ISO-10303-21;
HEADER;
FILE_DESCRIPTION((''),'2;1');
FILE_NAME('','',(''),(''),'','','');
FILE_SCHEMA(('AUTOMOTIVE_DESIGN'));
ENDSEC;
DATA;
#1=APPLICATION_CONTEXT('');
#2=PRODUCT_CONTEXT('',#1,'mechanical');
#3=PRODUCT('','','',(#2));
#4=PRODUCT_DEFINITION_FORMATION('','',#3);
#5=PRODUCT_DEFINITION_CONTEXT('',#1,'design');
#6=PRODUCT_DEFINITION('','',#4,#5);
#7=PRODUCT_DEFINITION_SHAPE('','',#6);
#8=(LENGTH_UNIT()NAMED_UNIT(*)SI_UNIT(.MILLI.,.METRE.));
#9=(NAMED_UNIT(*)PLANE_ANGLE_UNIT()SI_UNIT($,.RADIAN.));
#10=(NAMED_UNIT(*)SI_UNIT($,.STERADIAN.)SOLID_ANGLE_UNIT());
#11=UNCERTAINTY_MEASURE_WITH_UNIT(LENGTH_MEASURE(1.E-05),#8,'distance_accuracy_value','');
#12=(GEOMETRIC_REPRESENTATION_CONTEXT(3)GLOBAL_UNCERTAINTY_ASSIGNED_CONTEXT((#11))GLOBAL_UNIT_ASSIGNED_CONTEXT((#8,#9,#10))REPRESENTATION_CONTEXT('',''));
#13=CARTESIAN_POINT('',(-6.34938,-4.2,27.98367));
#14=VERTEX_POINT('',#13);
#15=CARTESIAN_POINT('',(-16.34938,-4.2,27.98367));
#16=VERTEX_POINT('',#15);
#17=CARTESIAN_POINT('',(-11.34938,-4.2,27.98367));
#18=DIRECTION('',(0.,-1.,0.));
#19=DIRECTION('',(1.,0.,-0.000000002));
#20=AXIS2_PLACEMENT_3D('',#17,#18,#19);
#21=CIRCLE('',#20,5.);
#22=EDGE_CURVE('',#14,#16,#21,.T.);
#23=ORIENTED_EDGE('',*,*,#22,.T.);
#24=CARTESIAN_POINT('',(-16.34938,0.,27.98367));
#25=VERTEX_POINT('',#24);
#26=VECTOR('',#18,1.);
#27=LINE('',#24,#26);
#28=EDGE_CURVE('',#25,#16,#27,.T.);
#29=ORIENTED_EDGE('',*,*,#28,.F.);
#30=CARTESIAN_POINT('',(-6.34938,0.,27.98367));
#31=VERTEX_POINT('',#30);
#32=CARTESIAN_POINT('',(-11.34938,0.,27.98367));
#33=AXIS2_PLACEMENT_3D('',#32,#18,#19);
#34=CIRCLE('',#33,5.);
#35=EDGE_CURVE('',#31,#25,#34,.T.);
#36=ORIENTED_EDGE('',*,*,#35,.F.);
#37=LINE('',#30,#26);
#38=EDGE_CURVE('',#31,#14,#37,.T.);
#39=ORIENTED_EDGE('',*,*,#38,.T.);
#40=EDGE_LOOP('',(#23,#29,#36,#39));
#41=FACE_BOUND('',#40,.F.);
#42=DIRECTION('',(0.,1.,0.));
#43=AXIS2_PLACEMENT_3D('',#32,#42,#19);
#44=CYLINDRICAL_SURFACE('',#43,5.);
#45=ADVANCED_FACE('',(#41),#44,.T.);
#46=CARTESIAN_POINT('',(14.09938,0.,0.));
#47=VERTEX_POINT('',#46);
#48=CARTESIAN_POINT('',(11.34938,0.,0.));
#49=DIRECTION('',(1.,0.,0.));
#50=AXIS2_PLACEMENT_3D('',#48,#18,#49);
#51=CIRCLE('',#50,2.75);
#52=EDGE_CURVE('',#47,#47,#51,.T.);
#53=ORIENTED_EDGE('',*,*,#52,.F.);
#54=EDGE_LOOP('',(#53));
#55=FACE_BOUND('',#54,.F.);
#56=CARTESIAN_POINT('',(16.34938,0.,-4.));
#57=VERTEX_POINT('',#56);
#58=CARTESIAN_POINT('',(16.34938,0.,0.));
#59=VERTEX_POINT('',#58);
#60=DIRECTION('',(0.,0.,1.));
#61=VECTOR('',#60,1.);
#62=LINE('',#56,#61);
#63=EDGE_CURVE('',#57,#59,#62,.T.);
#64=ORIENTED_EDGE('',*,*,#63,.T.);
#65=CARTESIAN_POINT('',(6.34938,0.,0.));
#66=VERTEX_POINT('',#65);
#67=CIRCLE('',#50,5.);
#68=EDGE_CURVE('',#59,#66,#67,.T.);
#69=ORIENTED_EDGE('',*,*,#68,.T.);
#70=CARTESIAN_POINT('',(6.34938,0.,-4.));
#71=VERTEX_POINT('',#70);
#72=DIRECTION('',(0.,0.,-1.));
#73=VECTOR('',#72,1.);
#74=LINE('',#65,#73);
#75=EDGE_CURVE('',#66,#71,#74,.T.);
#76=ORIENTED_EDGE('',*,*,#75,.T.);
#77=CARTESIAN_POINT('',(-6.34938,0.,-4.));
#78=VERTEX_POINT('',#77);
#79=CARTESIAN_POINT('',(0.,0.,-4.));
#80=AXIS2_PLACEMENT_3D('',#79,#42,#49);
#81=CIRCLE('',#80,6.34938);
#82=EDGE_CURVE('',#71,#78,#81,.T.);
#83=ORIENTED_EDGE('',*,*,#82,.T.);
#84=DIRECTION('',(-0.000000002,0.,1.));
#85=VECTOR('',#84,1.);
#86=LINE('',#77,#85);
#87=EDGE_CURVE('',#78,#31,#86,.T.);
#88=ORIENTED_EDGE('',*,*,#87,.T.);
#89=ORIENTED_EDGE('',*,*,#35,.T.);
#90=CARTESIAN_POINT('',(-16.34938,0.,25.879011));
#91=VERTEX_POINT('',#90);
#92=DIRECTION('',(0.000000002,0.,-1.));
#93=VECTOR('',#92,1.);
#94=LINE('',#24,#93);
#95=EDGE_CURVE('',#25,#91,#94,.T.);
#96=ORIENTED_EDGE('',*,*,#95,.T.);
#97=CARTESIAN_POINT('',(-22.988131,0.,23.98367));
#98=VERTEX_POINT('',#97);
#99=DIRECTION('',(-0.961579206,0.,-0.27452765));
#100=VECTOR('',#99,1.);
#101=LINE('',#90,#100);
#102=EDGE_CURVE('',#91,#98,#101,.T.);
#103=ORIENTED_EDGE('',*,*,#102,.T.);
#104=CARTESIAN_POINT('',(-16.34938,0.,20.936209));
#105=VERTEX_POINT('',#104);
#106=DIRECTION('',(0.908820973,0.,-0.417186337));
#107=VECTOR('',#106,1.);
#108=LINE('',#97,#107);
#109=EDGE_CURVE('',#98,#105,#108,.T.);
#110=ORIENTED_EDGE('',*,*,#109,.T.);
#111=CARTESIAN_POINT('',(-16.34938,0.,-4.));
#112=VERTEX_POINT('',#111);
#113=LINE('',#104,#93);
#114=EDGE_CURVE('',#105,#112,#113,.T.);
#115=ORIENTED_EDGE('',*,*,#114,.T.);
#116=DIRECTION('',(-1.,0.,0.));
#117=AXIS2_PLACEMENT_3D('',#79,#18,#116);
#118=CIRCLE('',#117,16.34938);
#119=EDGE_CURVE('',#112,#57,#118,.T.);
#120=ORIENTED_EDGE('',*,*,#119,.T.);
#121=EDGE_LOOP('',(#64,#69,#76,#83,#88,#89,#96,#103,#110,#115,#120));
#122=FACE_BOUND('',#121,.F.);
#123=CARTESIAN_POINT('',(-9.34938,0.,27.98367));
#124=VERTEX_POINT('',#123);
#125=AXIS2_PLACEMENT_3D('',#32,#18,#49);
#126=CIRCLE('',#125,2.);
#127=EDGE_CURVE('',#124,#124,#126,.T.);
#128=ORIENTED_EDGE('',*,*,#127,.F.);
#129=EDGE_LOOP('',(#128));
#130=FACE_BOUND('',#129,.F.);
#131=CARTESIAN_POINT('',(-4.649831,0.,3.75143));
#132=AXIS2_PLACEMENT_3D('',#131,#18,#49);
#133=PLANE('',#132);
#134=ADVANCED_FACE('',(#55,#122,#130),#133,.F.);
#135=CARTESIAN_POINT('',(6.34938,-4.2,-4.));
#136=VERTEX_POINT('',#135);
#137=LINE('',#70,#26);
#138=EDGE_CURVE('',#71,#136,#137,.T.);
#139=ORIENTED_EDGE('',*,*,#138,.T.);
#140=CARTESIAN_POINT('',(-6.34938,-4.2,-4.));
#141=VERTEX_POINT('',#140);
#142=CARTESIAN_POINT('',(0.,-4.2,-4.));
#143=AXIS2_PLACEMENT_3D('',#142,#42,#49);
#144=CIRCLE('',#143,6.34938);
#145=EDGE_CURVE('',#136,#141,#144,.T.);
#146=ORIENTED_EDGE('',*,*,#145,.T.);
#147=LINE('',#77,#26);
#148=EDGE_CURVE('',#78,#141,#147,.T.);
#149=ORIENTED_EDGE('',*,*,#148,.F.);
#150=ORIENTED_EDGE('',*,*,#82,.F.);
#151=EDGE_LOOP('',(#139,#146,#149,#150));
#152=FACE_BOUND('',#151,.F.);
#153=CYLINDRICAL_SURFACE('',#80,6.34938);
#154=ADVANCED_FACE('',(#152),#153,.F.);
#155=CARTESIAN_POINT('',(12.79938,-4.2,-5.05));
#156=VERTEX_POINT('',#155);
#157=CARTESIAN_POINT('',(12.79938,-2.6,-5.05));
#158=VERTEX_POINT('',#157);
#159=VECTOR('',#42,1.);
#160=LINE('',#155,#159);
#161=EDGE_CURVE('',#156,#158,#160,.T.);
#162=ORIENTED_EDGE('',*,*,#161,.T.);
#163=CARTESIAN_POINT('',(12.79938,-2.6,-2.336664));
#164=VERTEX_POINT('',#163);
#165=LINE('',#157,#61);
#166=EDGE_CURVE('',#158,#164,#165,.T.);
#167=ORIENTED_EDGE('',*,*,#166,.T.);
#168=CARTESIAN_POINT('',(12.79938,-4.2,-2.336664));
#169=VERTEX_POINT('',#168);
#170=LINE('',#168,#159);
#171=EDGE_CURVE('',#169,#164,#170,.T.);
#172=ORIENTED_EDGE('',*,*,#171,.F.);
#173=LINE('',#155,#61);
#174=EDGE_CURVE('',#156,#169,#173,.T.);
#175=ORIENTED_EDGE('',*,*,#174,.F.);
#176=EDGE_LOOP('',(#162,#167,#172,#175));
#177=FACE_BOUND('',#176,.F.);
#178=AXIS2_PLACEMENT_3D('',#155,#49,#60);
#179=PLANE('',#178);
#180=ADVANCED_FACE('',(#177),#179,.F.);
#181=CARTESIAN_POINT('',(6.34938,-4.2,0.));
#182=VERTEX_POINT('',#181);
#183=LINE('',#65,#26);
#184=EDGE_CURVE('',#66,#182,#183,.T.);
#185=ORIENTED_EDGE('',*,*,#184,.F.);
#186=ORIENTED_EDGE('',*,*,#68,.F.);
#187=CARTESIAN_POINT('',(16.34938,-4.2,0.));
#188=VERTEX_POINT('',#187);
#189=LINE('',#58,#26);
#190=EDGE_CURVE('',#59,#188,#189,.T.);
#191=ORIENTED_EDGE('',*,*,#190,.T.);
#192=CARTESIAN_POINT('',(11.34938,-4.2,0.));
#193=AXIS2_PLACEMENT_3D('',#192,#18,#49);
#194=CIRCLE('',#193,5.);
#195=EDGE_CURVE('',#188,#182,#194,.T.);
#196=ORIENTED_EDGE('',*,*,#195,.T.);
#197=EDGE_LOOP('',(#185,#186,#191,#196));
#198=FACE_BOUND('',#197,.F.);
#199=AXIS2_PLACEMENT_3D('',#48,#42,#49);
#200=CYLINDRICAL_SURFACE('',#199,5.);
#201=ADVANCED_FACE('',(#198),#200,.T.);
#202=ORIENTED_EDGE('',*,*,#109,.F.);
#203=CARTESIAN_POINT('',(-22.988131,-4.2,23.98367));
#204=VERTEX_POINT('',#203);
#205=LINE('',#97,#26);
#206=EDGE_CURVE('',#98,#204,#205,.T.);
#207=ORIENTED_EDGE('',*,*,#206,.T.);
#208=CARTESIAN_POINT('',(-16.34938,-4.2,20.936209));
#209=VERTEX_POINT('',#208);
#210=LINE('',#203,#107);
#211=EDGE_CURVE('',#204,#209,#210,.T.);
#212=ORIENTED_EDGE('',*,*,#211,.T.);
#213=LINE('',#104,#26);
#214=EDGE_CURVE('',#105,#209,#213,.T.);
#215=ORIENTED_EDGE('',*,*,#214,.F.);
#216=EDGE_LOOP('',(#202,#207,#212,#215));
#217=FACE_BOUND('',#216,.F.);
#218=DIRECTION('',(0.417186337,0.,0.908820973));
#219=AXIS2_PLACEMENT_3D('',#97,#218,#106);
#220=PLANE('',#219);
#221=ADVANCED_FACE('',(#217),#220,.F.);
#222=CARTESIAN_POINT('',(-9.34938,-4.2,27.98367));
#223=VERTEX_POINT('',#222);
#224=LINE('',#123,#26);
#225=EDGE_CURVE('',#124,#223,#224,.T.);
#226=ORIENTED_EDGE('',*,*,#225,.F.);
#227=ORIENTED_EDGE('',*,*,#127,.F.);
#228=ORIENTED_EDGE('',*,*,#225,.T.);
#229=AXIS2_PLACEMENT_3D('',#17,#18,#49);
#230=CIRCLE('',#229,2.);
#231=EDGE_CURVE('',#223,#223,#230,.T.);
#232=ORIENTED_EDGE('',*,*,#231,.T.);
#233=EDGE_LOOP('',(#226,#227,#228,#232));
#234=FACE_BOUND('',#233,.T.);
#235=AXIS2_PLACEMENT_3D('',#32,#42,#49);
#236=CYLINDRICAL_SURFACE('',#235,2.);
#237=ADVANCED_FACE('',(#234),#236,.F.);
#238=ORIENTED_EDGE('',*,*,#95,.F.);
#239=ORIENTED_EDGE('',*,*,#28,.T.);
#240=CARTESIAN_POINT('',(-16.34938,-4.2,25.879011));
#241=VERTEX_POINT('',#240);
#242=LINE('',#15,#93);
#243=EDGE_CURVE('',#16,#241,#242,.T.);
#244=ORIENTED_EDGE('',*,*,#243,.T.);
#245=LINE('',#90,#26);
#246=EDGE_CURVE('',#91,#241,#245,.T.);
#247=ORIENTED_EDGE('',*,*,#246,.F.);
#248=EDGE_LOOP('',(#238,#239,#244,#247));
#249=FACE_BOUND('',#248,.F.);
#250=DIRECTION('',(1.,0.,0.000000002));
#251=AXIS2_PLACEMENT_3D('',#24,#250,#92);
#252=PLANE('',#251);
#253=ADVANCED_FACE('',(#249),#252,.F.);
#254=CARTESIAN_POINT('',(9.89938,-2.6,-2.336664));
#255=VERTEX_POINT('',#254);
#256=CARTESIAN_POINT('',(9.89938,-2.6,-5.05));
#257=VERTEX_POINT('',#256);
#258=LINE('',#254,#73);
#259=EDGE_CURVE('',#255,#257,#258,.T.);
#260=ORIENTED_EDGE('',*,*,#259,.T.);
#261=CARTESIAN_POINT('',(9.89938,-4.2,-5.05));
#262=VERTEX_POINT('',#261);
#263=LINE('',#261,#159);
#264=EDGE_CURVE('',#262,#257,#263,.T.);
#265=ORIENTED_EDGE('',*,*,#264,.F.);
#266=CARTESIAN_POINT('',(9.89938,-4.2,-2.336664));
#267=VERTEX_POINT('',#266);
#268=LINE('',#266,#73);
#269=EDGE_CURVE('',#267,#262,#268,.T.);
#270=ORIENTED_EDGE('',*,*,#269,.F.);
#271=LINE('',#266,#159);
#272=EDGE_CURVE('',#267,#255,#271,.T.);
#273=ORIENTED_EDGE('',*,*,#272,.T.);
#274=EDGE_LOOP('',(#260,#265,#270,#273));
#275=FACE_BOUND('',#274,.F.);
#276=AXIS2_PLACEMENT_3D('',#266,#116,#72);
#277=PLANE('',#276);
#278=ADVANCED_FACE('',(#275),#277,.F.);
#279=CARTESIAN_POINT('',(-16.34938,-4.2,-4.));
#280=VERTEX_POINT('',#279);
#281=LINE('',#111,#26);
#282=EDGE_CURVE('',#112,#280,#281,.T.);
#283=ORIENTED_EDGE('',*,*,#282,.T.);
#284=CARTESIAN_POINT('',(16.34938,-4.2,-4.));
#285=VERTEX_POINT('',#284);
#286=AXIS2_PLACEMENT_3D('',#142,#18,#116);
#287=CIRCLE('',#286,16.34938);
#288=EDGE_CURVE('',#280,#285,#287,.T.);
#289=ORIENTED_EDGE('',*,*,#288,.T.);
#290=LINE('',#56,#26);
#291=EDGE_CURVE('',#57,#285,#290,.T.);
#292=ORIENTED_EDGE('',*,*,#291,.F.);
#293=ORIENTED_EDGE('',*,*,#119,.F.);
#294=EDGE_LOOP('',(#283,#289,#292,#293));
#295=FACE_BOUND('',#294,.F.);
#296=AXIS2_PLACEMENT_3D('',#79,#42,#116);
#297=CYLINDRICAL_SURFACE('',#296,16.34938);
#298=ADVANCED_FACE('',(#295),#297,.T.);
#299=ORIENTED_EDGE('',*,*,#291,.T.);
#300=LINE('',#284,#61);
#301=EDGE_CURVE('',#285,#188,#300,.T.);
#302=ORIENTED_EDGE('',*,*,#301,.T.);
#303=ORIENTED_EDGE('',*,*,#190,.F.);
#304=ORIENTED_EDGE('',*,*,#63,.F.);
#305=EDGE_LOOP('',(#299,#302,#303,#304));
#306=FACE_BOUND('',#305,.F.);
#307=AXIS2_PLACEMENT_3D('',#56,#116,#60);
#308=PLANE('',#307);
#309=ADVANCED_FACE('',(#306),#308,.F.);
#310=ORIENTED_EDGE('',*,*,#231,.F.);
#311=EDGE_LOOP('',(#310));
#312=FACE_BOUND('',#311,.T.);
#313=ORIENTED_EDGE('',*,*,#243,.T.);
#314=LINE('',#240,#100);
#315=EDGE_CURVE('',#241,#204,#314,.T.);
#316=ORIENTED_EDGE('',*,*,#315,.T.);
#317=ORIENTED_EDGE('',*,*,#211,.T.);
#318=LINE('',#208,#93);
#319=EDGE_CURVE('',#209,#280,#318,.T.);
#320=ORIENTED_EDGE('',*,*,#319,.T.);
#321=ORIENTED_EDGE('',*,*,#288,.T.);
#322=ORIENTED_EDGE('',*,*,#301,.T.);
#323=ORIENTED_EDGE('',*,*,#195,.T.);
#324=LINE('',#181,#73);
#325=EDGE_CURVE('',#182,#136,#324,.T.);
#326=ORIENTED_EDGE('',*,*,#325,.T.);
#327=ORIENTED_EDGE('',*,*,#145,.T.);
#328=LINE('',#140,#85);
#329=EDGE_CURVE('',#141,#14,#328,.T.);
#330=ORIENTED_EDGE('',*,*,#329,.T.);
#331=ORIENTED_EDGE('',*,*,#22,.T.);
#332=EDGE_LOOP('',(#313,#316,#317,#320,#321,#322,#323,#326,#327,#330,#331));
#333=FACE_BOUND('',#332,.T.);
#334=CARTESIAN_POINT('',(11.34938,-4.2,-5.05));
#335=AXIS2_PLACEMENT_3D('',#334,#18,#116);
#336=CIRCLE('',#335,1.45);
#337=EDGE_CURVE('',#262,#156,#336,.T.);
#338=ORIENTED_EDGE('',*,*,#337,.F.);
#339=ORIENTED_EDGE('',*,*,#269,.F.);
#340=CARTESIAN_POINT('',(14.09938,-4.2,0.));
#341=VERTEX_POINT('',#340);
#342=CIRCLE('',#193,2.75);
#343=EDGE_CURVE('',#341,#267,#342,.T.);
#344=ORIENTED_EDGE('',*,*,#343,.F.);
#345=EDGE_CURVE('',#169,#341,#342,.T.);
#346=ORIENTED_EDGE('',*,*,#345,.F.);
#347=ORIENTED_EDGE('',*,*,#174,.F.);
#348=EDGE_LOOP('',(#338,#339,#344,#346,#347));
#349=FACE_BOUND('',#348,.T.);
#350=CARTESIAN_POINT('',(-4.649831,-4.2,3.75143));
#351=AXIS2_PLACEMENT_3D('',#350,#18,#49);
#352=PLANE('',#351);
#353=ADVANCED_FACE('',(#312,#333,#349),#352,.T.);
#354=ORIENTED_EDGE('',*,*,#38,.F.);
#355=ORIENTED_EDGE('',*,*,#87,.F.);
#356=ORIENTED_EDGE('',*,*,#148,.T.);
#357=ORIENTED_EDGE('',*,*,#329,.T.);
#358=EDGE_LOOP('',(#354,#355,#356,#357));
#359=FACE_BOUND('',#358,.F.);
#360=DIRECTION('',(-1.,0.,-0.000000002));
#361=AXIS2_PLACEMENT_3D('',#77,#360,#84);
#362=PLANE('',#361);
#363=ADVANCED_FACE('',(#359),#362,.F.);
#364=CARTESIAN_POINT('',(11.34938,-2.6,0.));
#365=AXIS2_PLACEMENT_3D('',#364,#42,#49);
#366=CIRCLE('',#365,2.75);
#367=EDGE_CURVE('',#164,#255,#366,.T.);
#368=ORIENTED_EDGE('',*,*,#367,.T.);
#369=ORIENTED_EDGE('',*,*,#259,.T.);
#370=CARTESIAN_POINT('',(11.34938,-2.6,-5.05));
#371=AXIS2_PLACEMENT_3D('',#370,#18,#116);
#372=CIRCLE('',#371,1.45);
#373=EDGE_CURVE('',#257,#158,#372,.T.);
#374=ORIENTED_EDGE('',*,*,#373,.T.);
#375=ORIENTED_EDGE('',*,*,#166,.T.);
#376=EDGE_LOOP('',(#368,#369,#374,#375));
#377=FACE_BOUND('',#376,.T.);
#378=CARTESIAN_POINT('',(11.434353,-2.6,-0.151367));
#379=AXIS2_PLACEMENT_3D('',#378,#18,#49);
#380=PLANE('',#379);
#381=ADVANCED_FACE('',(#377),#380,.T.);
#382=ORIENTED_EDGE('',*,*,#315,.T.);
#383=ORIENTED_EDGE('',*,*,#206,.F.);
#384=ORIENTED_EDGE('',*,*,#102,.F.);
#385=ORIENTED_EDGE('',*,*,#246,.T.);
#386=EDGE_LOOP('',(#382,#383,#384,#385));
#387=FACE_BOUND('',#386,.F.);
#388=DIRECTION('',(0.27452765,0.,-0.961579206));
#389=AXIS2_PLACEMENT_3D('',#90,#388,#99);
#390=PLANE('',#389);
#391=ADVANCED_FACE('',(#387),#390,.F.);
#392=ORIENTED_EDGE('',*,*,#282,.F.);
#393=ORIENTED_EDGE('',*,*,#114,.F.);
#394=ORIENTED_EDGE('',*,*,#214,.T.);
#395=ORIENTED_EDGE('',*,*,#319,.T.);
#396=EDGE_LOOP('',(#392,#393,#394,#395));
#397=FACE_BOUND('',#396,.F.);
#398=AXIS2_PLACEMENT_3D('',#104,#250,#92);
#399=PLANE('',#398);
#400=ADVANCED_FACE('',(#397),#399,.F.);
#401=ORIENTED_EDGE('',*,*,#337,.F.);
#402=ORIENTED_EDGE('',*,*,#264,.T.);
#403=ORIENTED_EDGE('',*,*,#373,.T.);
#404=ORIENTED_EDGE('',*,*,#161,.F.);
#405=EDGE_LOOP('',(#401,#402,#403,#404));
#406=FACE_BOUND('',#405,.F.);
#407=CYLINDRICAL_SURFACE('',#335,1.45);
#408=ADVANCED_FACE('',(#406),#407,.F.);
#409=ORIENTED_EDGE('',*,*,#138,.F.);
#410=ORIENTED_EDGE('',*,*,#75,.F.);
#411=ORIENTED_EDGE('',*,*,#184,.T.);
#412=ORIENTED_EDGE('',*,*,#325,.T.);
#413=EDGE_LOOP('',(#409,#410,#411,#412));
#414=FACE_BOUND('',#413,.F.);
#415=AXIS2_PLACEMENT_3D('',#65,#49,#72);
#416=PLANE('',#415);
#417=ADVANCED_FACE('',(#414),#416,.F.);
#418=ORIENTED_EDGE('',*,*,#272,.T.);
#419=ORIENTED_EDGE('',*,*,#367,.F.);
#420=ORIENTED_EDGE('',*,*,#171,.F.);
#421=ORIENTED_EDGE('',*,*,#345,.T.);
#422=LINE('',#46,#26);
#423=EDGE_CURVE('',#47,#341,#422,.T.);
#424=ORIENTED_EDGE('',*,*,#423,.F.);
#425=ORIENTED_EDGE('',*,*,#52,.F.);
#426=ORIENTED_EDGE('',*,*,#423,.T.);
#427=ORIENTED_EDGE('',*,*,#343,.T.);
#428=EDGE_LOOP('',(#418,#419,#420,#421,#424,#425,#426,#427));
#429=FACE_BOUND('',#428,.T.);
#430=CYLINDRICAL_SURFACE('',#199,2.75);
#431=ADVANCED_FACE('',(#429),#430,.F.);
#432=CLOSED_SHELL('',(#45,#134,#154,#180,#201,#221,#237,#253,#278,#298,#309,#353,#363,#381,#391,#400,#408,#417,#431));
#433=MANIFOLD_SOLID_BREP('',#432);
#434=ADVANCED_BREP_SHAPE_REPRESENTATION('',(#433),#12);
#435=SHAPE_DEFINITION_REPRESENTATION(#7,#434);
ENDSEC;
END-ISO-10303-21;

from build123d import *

# Parameters (mm, degrees)
F1_R     = 2.75
F1_R_2   = 2
F2_DEPTH = 4.2
F4_DEPTH = 1.6


with BuildPart() as f2:
    # F1 (on Front) → F2 (new body)
    with BuildSketch(Plane.XZ):
        with BuildLine():
            Line((-6.3493797847, -4), (-6.3493798562, 27.98366989))
            ThreePointArc((-6.3493798562, 27.98366989), (-11.3493798562, 32.9836699012), (-16.3493798562, 27.98366989))
            Line((-16.3493798562, 27.98366989), (-16.3493798515, 25.8790112235))
            Line((-16.3493798515, 25.8790112235), (-22.9881312178, 23.98366989))
            Line((-22.9881312178, 23.98366989), (-16.3493798405, 20.9362090031))
            Line((-16.3493798405, 20.9362090031), (-16.3493797847, -4))
            ThreePointArc((-16.3493797847, -4), (0, -20.349379785), (16.3493797847, -4))
            Line((16.3493797847, -4), (16.3493797847, 0))
            ThreePointArc((16.3493797847, 0), (11.3493797847, 5), (6.3493797847, 0))
            Line((6.3493797847, 0), (6.3493797847, -4))
            ThreePointArc((6.3493797847, -4), (0, -10.3493797847), (-6.3493797847, -4))
        make_face()
        with Locations((11.3493797847, 0)):
            Circle(F1_R, mode=Mode.SUBTRACT)
        with Locations((-11.3493798562, 27.9836699012)):
            Circle(F1_R_2, mode=Mode.SUBTRACT)
    extrude(amount=F2_DEPTH)

    # F3 (on face) → F4 (cut)
    with BuildSketch(Plane.XZ.offset(4.2)):
        with BuildLine():
            ThreePointArc((9.8993797847, -2.3366642891), (11.3493797847, -2.75), (12.7993797847, -2.3366642891))
            ThreePointArc((12.7993797847, -2.3366642891), (13.7525027528, -1.3369741957), (14.0993797847, 0))
            ThreePointArc((14.0993797847, 0), (10.012405589, 2.4031229681), (9.8993797847, -2.3366642891))
        make_face()
        with BuildLine():
            Line((12.7993797847, -5.05), (12.7993797847, -2.3366642891))
            ThreePointArc((12.7993797847, -2.3366642891), (11.3493797847, -2.75), (9.8993797847, -2.3366642891))
            Line((9.8993797847, -2.3366642891), (9.8993797847, -5.05))
            ThreePointArc((9.8993797847, -5.05), (11.3493797847, -6.5), (12.7993797847, -5.05))
        make_face()
    extrude(amount=-F4_DEPTH, mode=Mode.SUBTRACT)


solid = f2.part
